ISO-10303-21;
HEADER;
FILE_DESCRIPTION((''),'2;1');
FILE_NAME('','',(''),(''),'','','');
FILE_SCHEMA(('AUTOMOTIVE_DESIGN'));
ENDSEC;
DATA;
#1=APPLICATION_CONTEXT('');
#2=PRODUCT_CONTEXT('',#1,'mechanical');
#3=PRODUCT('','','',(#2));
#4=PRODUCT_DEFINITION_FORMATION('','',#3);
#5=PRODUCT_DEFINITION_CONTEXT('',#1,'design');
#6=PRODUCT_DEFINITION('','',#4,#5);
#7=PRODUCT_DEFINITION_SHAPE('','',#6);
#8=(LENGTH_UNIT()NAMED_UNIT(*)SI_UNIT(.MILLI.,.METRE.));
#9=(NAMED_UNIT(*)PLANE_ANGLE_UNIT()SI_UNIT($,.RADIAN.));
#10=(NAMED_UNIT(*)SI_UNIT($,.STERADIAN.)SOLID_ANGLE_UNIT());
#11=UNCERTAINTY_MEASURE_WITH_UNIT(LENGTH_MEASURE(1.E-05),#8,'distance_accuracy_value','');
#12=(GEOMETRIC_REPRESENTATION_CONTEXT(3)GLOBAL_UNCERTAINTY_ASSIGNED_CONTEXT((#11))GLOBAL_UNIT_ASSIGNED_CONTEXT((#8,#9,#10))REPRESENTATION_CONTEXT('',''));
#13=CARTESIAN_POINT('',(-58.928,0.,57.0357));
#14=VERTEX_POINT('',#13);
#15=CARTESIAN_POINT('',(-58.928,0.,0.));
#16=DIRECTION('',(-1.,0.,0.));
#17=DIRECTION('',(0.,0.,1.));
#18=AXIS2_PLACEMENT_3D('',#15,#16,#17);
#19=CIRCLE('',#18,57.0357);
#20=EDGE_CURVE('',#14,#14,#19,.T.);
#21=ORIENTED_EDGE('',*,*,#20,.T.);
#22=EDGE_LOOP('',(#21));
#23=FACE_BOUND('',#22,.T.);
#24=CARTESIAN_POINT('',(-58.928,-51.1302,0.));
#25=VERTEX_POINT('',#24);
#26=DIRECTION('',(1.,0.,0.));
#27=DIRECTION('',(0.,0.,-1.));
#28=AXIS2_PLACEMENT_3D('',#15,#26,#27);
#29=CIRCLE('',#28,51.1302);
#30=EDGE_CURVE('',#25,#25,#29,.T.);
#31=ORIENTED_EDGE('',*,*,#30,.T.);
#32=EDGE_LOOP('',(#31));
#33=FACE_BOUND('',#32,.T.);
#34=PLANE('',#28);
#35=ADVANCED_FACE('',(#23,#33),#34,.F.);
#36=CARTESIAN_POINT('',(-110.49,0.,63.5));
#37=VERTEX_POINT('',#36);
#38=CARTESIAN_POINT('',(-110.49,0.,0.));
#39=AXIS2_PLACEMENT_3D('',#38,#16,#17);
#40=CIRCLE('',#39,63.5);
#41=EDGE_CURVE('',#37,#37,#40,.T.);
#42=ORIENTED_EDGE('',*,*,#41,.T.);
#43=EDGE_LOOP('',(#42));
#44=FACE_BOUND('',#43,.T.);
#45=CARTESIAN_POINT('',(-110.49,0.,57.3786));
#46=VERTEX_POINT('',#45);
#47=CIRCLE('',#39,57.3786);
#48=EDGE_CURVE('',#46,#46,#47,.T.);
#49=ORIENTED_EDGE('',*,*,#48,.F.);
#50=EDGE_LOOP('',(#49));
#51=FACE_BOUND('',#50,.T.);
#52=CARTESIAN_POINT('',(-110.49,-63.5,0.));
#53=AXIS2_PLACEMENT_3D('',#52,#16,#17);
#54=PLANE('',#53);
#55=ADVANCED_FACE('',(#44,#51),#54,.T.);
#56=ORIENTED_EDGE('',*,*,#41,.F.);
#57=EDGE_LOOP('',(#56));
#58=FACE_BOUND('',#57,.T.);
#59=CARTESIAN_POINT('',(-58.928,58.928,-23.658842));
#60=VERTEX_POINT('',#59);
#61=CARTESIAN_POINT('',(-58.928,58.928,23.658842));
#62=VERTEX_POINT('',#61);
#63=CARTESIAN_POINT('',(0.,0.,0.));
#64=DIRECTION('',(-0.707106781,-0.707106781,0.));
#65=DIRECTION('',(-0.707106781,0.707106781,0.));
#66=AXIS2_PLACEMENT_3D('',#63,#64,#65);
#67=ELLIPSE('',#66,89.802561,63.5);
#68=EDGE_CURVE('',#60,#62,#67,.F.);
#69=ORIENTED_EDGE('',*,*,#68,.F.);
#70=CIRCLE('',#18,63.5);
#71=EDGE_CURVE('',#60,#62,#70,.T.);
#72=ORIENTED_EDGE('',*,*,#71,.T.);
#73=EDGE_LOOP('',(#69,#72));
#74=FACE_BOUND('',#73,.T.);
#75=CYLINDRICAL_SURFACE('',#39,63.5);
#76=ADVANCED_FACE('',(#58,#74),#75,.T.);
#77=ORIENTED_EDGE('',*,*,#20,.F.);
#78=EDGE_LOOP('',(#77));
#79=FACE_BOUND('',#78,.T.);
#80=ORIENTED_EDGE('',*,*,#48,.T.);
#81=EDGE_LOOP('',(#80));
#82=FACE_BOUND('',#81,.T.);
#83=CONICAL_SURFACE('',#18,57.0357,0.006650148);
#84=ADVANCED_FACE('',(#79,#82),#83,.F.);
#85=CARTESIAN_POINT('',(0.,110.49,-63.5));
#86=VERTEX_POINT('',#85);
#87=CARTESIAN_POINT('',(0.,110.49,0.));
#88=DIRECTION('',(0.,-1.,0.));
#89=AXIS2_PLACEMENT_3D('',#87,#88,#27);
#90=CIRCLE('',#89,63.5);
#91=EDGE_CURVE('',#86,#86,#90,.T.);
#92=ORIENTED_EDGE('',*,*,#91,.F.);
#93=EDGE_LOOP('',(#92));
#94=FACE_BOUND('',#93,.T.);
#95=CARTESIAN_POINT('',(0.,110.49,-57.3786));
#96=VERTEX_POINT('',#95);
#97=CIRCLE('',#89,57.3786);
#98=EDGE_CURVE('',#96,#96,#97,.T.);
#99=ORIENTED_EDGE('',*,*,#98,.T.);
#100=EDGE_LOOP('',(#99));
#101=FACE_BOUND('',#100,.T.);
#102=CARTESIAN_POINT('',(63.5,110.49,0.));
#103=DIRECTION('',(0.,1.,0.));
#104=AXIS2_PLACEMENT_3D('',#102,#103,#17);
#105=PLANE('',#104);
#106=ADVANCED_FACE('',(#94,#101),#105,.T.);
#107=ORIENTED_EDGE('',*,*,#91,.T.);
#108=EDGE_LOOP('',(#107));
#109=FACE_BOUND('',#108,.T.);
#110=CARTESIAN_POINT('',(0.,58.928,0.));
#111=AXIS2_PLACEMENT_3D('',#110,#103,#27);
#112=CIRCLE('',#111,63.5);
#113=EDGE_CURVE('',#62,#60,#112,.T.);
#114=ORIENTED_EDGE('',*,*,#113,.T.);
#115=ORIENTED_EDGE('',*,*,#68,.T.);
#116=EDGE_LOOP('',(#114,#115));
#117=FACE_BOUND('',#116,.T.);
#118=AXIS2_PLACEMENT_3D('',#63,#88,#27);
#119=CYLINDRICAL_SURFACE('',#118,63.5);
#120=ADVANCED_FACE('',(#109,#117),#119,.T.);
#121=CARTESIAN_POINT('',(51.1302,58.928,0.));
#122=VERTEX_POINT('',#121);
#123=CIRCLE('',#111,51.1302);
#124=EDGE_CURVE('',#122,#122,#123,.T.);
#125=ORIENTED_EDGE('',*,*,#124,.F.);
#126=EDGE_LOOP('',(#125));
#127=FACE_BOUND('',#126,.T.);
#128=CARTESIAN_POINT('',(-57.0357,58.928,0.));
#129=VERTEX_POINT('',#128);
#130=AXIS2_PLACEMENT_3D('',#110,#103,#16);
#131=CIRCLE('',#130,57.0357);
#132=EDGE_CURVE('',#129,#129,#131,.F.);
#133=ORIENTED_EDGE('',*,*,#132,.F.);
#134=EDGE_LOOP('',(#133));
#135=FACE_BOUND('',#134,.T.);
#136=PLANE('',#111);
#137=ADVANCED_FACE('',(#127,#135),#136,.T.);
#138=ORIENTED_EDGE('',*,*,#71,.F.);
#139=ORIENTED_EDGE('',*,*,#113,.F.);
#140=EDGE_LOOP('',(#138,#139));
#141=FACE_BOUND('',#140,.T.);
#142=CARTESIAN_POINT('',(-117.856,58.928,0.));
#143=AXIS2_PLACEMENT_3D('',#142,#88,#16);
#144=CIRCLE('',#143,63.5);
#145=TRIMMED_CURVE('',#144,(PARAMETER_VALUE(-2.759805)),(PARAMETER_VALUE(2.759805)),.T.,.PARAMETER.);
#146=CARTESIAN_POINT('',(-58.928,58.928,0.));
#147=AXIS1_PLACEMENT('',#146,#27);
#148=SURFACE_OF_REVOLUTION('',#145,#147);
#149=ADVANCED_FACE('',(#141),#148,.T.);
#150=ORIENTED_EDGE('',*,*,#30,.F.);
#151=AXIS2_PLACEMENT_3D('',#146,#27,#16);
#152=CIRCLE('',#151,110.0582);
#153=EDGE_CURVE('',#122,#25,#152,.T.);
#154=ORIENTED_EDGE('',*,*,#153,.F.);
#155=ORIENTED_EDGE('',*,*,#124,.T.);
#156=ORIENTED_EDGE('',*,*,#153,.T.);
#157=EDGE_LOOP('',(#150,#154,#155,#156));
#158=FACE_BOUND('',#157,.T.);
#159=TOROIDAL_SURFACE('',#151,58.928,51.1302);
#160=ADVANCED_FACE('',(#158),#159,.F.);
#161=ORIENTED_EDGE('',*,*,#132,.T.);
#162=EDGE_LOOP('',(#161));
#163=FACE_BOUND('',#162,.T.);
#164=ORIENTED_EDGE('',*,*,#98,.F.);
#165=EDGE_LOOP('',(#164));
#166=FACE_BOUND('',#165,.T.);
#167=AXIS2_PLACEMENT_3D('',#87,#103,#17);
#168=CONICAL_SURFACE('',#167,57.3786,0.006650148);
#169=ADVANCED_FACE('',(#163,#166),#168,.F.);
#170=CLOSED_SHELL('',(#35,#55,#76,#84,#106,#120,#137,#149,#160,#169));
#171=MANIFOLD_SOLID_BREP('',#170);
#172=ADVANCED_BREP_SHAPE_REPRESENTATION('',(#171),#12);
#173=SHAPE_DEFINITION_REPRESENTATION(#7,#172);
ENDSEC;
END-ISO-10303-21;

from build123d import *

# Parameters (mm, degrees)
SKETCH3_R   = 63.5
SKETCH3_R_2 = 51.1302


with BuildPart() as part:
    # Sketch1 → Revolve1 (revolve)
    with BuildSketch(Plane.XY):
        Polygon((-110.49, -63.5), (-58.928, -63.5), (-58.928, -57.0357), (-110.49, -57.3786), align=None)
    revolve(axis=Axis((-110.49, 0, 0), (1, 0, 0)))


with BuildPart() as body_2:
    # Sketch2 → Revolve2 (revolve)
    with BuildSketch(Plane.XY):
        Polygon((57.3786, 110.49), (57.0357, 58.928), (63.5, 58.928), (63.5, 110.49), align=None)
    revolve(axis=Axis((0, 0, 0), (0, 1, 0)))


with BuildPart() as sweep1_tool:
    # Sweep1: sweep along a path in Sketch4
    with BuildLine(Plane.XY) as sweep1_path:
        ThreePointArc((-58.928, 0), (-17.259612, 17.259612), (0, 58.928))
    # Sketch3 → Sweep1 (sweep)
    with BuildSketch(Plane(origin=(-58.928, 0, 0), x_dir=(0, 0, -1), z_dir=(1, 0, 0))):
        Circle(SKETCH3_R)
        Circle(SKETCH3_R_2, mode=Mode.SUBTRACT)
    sweep(path=sweep1_path.line)


with BuildPart() as part_1:
    add(part.part)


with BuildPart() as part_2:
    # Sweep1: joined with sweep1_tool
    add(part_1.part.fuse(sweep1_tool.part, body_2.part, tol=0.00001))


solid = part_2.part
